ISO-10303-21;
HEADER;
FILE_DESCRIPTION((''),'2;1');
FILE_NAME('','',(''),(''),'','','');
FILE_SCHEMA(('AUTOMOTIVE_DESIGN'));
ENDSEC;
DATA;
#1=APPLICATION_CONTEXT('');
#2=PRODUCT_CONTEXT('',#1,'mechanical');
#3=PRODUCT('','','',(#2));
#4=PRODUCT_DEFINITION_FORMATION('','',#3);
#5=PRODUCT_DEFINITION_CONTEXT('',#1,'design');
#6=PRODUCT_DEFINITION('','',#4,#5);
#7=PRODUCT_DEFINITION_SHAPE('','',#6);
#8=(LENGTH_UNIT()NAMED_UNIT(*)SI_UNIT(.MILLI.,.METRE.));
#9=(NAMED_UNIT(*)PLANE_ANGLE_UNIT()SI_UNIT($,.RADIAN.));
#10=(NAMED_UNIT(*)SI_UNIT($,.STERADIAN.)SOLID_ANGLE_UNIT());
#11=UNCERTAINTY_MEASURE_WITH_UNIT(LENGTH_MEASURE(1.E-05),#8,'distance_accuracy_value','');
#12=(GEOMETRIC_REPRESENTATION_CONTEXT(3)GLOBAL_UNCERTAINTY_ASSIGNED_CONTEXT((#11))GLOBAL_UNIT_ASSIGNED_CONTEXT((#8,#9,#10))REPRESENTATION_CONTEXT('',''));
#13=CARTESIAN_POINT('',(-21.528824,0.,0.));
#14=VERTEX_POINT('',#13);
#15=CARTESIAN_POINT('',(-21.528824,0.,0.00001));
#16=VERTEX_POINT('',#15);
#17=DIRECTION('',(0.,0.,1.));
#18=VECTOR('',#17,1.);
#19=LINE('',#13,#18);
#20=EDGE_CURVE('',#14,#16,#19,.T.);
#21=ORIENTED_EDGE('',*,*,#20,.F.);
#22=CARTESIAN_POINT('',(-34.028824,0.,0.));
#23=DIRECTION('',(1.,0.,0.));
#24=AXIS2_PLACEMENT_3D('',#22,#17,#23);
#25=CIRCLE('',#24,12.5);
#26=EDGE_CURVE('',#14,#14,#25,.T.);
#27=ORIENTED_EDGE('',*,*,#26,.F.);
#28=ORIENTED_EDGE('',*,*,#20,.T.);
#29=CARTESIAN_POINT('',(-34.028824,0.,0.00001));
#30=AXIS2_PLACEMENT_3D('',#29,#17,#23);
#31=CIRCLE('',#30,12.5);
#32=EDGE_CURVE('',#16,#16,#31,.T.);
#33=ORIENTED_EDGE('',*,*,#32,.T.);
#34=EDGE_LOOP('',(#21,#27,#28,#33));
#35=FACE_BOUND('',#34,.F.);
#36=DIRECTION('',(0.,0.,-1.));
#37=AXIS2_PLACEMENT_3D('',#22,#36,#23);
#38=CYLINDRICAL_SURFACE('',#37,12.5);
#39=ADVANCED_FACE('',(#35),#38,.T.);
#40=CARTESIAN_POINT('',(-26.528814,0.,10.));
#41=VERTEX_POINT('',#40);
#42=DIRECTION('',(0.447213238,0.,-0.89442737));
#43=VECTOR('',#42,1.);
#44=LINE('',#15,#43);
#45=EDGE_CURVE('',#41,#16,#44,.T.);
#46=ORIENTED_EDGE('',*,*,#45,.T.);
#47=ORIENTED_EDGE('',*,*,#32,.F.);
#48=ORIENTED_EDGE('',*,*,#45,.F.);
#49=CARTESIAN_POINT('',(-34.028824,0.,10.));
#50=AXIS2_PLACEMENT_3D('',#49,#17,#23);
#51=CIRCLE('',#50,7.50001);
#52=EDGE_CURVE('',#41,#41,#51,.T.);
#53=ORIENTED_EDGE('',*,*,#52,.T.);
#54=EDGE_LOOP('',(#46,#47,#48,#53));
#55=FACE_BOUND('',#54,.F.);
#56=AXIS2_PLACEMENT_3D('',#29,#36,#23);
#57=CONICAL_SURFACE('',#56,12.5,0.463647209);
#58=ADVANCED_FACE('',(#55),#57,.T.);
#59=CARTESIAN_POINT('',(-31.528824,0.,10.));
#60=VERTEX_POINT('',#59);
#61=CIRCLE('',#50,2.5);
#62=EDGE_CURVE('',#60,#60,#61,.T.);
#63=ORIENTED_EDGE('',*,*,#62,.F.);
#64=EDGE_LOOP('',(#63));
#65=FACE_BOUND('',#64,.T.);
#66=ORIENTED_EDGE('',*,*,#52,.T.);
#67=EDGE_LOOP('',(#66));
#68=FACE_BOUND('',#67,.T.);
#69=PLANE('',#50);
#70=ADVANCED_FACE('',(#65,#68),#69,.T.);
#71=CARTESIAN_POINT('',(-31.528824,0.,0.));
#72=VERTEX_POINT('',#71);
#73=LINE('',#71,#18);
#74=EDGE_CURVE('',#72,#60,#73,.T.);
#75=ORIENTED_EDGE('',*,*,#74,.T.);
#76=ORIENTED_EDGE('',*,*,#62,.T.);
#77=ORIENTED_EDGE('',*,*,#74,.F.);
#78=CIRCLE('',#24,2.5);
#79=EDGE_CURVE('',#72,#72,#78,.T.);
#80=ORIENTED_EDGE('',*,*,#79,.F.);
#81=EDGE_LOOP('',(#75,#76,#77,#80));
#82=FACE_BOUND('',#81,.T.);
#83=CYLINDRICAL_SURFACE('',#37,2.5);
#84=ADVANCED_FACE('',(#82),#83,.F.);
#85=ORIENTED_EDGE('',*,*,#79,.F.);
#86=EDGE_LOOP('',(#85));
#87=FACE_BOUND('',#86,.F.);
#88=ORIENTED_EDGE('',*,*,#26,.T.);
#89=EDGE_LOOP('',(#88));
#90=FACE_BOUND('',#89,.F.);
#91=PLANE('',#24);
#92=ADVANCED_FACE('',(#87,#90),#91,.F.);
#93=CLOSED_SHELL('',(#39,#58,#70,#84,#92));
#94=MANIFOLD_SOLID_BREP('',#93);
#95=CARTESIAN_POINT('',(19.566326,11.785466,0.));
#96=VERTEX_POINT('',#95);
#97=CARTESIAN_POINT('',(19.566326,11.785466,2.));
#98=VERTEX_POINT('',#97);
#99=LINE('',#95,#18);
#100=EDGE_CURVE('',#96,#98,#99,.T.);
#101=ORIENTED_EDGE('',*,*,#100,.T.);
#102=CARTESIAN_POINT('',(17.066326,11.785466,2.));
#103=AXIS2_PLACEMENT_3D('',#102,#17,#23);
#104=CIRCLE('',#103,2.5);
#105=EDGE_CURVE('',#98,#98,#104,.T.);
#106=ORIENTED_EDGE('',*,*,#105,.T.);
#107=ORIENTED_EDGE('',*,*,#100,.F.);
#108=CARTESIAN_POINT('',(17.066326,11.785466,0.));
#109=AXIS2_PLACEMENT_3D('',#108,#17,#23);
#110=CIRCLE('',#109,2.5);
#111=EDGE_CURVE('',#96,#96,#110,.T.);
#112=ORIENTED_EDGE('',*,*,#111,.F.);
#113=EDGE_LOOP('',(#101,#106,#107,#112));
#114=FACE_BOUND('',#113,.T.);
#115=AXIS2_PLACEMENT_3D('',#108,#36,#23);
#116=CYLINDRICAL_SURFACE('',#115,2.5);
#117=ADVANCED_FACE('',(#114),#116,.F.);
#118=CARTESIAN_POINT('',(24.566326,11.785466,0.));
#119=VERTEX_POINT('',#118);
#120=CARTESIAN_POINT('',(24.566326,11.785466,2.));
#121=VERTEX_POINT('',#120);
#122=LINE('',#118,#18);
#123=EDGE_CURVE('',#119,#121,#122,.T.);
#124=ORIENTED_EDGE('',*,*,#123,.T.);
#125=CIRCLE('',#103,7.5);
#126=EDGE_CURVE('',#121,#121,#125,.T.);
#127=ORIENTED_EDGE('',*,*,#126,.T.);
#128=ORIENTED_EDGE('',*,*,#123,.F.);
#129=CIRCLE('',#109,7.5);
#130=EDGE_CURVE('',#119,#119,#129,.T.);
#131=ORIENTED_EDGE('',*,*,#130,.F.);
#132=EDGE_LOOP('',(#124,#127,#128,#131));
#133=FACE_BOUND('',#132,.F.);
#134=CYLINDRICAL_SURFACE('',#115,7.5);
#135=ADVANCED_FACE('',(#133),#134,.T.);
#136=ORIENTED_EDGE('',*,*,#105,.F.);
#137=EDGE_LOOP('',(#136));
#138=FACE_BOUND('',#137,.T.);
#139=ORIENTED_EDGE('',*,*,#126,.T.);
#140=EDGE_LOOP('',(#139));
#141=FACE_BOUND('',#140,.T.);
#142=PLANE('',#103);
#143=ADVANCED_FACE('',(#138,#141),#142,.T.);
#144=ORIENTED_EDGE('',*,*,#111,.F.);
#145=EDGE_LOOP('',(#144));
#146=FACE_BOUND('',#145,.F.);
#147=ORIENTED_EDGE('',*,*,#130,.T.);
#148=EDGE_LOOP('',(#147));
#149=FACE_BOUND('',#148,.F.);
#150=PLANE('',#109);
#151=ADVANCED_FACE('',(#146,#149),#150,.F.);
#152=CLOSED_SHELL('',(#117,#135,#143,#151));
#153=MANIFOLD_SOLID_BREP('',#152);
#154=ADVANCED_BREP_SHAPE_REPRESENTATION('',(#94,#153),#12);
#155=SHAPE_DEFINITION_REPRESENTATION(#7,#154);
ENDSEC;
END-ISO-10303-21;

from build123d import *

# Parameters (mm, degrees)
F0_R     = 12.5
F0_R_2   = 2.5
F1_DEPTH = 10
F0_R_3   = 7.5
F2_DEPTH = 2
F3_SIZE2 = 9.99999
F3_SIZE  = 4.99999


# Not quite as in the source:
# - a fillet or chamfer is up to 0.001 mm smaller than in the source, because OpenCascade refuses the exact size


with BuildPart() as f1:
    # F0 (on Top) → F1 (new body)
    with BuildSketch(Plane.XY):
        with Locations((-34.0288244188, 0)):
            Circle(F0_R)
        with Locations((-34.0288244188, 0)):
            Circle(F0_R_2, mode=Mode.SUBTRACT)
    extrude(amount=F1_DEPTH)

    # F3 (size 5 and 10 in the source; OpenCascade refuses exactly that, so slightly less here)
    f3_edges = [f1.edges().sort_by_distance(p)[0] for p in [
        (-46.528824, 0, 10),
    ]]
    f3_side = f1.faces().sort_by_distance((-46.175271, 0, 10))[0]
    chamfer(f3_edges, length=F3_SIZE, length2=F3_SIZE2, reference=f3_side)


with BuildPart() as f2:
    # F0 (on Top) → F2 (new body)
    with BuildSketch(Plane.XY):
        with Locations((17.0663259923, 11.785466224)):
            Circle(F0_R_3)
        with Locations((17.0663259923, 11.785466224)):
            Circle(F0_R_2, mode=Mode.SUBTRACT)
    extrude(amount=F2_DEPTH)


solid = Compound([f1.part, f2.part])
